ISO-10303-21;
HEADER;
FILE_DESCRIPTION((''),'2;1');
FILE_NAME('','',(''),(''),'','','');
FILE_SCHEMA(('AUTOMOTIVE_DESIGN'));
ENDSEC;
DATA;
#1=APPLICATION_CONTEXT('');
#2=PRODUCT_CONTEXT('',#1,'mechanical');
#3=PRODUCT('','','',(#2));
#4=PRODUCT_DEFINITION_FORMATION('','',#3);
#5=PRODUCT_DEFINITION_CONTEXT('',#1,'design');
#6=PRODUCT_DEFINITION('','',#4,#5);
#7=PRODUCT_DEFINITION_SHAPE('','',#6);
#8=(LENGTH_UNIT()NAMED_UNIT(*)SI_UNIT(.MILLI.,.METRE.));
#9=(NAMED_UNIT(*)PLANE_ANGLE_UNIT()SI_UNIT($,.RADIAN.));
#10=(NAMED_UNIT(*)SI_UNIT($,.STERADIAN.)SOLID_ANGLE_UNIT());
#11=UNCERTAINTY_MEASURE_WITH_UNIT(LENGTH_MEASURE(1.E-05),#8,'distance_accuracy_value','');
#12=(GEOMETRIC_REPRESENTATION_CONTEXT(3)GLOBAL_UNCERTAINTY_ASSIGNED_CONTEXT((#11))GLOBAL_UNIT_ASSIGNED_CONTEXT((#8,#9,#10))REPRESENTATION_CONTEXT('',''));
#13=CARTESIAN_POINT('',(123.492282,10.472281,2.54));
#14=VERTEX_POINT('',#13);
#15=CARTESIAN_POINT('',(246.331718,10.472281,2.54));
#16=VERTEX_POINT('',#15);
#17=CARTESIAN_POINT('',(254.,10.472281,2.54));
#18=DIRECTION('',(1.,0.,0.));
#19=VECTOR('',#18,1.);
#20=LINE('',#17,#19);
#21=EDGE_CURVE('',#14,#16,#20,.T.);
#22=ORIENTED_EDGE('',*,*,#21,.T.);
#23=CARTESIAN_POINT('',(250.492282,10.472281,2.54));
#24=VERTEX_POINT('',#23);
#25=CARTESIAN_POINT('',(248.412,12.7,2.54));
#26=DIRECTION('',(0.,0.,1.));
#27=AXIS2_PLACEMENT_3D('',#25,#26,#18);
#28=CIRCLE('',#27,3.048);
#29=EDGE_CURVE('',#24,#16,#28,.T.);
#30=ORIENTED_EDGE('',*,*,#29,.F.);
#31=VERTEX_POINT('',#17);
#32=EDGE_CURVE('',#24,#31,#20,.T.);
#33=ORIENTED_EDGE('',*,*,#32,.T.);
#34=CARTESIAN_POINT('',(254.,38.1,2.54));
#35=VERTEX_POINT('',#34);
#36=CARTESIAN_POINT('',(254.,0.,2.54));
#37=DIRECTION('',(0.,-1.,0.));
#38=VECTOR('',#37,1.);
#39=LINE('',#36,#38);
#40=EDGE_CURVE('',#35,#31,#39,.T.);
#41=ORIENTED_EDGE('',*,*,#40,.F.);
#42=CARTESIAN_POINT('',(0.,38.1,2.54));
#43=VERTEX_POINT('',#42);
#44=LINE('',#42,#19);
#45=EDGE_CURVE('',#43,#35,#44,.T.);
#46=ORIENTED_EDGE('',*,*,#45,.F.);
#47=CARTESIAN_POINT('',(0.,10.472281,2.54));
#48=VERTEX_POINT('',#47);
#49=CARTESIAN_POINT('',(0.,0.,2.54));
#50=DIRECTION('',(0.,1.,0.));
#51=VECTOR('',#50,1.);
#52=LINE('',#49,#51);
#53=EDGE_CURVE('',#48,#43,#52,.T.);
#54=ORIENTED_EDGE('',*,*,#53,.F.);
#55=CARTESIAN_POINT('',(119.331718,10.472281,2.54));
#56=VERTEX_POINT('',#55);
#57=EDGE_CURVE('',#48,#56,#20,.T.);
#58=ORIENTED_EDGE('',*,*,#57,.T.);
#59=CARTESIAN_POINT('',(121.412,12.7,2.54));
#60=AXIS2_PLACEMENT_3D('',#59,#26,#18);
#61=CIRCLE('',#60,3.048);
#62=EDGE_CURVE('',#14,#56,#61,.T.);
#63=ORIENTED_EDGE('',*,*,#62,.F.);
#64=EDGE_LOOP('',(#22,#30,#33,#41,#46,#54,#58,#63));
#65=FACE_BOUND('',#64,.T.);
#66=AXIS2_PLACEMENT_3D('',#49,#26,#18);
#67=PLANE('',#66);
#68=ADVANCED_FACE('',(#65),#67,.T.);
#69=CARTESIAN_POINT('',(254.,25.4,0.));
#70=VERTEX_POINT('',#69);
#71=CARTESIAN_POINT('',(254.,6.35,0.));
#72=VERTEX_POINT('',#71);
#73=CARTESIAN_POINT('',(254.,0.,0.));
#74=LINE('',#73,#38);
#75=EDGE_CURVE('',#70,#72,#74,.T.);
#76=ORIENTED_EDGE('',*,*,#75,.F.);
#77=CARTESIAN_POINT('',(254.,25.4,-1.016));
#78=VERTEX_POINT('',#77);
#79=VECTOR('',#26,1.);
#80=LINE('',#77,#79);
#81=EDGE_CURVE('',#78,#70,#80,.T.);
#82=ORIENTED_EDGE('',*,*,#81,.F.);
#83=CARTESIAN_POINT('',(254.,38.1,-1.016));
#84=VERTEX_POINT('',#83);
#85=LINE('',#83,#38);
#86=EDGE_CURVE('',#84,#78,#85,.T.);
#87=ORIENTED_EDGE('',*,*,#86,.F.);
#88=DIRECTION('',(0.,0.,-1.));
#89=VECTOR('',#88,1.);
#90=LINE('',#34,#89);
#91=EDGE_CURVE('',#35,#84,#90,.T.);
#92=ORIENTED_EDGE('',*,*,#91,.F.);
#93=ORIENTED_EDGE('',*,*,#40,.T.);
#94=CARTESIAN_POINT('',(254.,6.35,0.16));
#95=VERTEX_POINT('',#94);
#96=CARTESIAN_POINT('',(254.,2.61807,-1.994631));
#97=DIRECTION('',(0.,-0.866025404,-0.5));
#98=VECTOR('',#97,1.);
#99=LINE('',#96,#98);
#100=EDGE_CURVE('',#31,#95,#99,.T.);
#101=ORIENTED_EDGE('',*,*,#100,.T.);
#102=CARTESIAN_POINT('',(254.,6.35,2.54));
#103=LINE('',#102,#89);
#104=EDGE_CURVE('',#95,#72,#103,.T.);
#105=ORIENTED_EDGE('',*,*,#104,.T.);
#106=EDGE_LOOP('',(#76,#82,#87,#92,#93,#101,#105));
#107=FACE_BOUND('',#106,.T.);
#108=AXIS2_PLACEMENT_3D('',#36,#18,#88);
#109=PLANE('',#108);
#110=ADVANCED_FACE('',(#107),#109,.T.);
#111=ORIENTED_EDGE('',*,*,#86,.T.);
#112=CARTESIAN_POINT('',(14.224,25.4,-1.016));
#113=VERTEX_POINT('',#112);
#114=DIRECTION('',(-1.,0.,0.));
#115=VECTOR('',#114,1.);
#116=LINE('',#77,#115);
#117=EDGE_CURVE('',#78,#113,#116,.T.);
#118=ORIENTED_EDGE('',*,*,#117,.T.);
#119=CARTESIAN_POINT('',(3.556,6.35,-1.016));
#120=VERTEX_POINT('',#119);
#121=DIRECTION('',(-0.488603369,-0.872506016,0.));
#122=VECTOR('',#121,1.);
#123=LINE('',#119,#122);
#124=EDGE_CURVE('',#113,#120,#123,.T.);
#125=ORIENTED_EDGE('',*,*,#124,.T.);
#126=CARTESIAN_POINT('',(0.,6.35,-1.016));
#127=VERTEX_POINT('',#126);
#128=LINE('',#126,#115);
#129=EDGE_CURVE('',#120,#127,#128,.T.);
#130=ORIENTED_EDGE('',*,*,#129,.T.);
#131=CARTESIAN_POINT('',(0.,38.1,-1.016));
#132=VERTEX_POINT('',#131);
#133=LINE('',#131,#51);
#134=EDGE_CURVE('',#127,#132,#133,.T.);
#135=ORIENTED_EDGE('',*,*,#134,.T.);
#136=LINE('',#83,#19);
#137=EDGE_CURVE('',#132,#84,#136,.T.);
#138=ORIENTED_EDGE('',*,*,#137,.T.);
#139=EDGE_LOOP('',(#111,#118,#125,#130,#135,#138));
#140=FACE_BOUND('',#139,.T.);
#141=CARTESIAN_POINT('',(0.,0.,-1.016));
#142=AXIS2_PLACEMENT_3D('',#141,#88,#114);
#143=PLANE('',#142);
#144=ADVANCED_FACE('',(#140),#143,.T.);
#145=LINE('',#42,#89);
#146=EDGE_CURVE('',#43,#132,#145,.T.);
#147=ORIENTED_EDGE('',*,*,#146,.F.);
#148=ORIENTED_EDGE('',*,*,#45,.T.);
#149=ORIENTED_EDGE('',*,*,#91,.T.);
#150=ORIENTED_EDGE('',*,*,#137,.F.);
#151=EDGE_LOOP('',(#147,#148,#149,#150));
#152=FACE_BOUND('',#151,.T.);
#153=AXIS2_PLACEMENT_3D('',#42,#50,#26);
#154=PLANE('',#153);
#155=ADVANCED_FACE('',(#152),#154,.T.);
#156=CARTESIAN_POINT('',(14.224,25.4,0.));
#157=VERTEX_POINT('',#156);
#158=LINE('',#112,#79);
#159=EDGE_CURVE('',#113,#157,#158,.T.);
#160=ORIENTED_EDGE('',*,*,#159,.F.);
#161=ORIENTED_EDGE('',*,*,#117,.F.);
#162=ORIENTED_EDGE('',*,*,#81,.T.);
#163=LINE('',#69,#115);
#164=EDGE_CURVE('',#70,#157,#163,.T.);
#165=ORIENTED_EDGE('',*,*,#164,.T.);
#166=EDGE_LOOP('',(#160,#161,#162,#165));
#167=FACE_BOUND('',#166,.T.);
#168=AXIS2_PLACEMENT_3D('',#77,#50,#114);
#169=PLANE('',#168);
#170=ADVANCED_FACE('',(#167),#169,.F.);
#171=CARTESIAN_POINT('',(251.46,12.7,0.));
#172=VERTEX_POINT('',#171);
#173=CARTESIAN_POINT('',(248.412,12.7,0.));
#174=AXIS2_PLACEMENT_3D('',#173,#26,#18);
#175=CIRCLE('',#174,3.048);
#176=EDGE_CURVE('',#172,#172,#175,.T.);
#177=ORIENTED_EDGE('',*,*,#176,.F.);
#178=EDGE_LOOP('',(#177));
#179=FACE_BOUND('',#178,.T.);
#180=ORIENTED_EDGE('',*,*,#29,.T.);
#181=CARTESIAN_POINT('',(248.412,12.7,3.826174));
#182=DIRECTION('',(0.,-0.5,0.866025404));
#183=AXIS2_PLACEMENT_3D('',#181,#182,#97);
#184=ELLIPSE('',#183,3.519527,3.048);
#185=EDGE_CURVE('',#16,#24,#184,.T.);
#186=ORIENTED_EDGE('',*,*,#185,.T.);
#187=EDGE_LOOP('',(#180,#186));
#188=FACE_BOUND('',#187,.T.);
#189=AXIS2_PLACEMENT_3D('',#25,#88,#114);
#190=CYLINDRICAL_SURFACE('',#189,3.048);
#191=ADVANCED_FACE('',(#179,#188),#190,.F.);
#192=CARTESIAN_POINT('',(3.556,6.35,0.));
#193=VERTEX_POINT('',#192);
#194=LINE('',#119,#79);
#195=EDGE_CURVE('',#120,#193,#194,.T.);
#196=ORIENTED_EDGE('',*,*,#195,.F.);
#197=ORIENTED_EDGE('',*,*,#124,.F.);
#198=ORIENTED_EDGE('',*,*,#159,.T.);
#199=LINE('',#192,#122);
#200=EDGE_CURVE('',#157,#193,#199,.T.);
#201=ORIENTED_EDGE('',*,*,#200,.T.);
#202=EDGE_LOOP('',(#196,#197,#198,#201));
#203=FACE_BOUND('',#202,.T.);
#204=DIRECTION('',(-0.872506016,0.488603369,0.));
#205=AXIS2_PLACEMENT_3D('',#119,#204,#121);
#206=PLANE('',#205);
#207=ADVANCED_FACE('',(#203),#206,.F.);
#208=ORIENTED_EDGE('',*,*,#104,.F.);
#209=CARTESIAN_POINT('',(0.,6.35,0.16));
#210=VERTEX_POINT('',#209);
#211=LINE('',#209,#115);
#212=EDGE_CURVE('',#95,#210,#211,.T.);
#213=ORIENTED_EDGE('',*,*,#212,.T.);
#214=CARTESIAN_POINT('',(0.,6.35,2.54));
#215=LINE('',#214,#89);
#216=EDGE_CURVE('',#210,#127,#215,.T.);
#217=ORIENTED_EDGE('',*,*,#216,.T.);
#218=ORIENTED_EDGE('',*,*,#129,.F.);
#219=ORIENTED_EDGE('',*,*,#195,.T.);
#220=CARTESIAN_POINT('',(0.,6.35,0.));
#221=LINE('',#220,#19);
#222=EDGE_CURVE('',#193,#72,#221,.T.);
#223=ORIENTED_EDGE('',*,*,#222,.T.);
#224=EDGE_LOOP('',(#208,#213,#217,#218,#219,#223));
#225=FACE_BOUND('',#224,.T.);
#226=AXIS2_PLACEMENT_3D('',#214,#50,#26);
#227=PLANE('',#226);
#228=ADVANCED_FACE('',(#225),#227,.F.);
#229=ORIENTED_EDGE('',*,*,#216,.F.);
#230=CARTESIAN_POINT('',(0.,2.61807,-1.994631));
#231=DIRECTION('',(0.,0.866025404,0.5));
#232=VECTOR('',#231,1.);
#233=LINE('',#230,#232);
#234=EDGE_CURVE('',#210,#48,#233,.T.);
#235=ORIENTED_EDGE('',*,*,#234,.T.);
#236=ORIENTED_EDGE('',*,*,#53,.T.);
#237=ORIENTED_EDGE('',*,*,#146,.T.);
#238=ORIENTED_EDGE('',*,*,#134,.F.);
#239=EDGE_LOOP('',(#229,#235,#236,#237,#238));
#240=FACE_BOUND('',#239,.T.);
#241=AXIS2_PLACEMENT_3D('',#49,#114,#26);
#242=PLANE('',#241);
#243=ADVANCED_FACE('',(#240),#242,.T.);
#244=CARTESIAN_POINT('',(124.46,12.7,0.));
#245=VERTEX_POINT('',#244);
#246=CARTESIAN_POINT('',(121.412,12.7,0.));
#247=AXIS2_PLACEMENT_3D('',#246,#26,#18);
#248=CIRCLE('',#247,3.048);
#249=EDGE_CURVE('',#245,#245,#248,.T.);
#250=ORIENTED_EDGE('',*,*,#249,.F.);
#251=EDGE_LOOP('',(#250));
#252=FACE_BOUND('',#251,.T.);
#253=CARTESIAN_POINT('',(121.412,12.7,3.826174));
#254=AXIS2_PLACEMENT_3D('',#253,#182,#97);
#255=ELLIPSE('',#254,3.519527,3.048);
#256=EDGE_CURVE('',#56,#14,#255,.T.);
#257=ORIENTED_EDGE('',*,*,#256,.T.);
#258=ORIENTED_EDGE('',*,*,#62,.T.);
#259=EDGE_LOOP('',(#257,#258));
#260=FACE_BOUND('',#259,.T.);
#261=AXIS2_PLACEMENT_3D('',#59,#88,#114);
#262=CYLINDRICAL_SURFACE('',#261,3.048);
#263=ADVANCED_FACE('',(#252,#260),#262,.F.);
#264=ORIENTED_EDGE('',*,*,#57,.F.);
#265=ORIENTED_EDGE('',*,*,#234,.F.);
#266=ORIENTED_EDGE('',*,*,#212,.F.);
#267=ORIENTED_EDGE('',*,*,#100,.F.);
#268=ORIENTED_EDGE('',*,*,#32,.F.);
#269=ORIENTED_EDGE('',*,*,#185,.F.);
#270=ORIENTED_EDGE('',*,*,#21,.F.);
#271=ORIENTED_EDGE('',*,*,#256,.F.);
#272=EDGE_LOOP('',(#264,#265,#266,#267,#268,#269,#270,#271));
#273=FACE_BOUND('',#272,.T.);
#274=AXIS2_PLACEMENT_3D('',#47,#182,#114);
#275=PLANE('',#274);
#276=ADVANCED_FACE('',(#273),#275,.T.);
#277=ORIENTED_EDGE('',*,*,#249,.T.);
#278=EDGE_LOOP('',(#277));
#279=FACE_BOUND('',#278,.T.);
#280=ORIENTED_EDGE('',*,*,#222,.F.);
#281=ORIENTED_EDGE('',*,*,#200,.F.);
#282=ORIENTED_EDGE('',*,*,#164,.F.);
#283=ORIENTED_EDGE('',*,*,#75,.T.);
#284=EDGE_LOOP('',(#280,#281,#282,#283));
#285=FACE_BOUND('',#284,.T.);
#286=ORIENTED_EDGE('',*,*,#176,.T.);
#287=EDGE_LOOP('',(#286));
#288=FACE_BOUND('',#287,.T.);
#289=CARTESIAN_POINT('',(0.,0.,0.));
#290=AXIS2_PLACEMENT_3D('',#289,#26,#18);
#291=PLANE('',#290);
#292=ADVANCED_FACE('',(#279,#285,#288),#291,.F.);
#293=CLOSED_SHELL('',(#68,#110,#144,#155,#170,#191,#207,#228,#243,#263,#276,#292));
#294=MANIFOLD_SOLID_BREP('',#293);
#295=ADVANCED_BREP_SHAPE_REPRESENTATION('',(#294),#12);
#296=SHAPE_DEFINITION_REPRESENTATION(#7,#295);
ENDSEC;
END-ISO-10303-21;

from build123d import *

# Parameters (mm, degrees)
SKETCH1_W           = 254
SKETCH1_H           = 31.75
SKETCH1_R           = 3.048
BOSS_EXTRUDE1_DEPTH = 2.54
CHAMFER1_SIZE       = 2.38
CHAMFER1_SIZE_2     = 4.122280922
SKETCH3_W           = 254
SKETCH3_H           = 12.7
BOSS_EXTRUDE2_DEPTH = 1.016
BOSS_EXTRUDE3_DEPTH = 1.016


with BuildPart() as part:
    # Sketch1 → Boss-Extrude1 (new body)
    with BuildSketch(Plane.XY):
        with Locations((127, 22.225)):
            Rectangle(SKETCH1_W, SKETCH1_H)
        with Locations((121.412, 12.7)):
            Circle(SKETCH1_R, mode=Mode.SUBTRACT)
        with Locations((248.412, 12.7)):
            Circle(SKETCH1_R, mode=Mode.SUBTRACT)
    extrude(amount=BOSS_EXTRUDE1_DEPTH)

    # Chamfer1
    # the kernel refuses this chamfer: 4.122280922, 2.38 mm, written as the material it takes off along each edge
    with BuildSketch(Plane(origin=(264.66469425, 6.35, 2.54), x_dir=(0, -0.05789386240267149, -0.9983227437537926), z_dir=(-1, 0, 0))) as chamfer1_piece_1:
        Polygon((CHAMFER1_SIZE * 0.998322743754, -CHAMFER1_SIZE * 0.0578938624027), (-CHAMFER1_SIZE_2 * 0.0578938624029, -CHAMFER1_SIZE_2 * 0.998322743757), (0, 0), align=None)
    extrude(amount=275.3293885, mode=Mode.SUBTRACT)

    # Sketch3 → Boss-Extrude2 (add)
    with BuildSketch(Plane(origin=(0, 0, 0), x_dir=(-1, 0, 0), z_dir=(0, 0, -1))):
        with Locations((-127, 31.75)):
            Rectangle(SKETCH3_W, SKETCH3_H)
    extrude(amount=BOSS_EXTRUDE2_DEPTH)

    # Sketch4 → Boss-Extrude3 (add)
    with BuildSketch(Plane(origin=(0, 0, 0), x_dir=(-1, 0, 0), z_dir=(0, 0, -1))):
        Polygon((0, 25.4), (0, 6.35), (-3.556, 6.35), (-14.224, 25.4), align=None)
    extrude(amount=BOSS_EXTRUDE3_DEPTH)


solid = part.part
